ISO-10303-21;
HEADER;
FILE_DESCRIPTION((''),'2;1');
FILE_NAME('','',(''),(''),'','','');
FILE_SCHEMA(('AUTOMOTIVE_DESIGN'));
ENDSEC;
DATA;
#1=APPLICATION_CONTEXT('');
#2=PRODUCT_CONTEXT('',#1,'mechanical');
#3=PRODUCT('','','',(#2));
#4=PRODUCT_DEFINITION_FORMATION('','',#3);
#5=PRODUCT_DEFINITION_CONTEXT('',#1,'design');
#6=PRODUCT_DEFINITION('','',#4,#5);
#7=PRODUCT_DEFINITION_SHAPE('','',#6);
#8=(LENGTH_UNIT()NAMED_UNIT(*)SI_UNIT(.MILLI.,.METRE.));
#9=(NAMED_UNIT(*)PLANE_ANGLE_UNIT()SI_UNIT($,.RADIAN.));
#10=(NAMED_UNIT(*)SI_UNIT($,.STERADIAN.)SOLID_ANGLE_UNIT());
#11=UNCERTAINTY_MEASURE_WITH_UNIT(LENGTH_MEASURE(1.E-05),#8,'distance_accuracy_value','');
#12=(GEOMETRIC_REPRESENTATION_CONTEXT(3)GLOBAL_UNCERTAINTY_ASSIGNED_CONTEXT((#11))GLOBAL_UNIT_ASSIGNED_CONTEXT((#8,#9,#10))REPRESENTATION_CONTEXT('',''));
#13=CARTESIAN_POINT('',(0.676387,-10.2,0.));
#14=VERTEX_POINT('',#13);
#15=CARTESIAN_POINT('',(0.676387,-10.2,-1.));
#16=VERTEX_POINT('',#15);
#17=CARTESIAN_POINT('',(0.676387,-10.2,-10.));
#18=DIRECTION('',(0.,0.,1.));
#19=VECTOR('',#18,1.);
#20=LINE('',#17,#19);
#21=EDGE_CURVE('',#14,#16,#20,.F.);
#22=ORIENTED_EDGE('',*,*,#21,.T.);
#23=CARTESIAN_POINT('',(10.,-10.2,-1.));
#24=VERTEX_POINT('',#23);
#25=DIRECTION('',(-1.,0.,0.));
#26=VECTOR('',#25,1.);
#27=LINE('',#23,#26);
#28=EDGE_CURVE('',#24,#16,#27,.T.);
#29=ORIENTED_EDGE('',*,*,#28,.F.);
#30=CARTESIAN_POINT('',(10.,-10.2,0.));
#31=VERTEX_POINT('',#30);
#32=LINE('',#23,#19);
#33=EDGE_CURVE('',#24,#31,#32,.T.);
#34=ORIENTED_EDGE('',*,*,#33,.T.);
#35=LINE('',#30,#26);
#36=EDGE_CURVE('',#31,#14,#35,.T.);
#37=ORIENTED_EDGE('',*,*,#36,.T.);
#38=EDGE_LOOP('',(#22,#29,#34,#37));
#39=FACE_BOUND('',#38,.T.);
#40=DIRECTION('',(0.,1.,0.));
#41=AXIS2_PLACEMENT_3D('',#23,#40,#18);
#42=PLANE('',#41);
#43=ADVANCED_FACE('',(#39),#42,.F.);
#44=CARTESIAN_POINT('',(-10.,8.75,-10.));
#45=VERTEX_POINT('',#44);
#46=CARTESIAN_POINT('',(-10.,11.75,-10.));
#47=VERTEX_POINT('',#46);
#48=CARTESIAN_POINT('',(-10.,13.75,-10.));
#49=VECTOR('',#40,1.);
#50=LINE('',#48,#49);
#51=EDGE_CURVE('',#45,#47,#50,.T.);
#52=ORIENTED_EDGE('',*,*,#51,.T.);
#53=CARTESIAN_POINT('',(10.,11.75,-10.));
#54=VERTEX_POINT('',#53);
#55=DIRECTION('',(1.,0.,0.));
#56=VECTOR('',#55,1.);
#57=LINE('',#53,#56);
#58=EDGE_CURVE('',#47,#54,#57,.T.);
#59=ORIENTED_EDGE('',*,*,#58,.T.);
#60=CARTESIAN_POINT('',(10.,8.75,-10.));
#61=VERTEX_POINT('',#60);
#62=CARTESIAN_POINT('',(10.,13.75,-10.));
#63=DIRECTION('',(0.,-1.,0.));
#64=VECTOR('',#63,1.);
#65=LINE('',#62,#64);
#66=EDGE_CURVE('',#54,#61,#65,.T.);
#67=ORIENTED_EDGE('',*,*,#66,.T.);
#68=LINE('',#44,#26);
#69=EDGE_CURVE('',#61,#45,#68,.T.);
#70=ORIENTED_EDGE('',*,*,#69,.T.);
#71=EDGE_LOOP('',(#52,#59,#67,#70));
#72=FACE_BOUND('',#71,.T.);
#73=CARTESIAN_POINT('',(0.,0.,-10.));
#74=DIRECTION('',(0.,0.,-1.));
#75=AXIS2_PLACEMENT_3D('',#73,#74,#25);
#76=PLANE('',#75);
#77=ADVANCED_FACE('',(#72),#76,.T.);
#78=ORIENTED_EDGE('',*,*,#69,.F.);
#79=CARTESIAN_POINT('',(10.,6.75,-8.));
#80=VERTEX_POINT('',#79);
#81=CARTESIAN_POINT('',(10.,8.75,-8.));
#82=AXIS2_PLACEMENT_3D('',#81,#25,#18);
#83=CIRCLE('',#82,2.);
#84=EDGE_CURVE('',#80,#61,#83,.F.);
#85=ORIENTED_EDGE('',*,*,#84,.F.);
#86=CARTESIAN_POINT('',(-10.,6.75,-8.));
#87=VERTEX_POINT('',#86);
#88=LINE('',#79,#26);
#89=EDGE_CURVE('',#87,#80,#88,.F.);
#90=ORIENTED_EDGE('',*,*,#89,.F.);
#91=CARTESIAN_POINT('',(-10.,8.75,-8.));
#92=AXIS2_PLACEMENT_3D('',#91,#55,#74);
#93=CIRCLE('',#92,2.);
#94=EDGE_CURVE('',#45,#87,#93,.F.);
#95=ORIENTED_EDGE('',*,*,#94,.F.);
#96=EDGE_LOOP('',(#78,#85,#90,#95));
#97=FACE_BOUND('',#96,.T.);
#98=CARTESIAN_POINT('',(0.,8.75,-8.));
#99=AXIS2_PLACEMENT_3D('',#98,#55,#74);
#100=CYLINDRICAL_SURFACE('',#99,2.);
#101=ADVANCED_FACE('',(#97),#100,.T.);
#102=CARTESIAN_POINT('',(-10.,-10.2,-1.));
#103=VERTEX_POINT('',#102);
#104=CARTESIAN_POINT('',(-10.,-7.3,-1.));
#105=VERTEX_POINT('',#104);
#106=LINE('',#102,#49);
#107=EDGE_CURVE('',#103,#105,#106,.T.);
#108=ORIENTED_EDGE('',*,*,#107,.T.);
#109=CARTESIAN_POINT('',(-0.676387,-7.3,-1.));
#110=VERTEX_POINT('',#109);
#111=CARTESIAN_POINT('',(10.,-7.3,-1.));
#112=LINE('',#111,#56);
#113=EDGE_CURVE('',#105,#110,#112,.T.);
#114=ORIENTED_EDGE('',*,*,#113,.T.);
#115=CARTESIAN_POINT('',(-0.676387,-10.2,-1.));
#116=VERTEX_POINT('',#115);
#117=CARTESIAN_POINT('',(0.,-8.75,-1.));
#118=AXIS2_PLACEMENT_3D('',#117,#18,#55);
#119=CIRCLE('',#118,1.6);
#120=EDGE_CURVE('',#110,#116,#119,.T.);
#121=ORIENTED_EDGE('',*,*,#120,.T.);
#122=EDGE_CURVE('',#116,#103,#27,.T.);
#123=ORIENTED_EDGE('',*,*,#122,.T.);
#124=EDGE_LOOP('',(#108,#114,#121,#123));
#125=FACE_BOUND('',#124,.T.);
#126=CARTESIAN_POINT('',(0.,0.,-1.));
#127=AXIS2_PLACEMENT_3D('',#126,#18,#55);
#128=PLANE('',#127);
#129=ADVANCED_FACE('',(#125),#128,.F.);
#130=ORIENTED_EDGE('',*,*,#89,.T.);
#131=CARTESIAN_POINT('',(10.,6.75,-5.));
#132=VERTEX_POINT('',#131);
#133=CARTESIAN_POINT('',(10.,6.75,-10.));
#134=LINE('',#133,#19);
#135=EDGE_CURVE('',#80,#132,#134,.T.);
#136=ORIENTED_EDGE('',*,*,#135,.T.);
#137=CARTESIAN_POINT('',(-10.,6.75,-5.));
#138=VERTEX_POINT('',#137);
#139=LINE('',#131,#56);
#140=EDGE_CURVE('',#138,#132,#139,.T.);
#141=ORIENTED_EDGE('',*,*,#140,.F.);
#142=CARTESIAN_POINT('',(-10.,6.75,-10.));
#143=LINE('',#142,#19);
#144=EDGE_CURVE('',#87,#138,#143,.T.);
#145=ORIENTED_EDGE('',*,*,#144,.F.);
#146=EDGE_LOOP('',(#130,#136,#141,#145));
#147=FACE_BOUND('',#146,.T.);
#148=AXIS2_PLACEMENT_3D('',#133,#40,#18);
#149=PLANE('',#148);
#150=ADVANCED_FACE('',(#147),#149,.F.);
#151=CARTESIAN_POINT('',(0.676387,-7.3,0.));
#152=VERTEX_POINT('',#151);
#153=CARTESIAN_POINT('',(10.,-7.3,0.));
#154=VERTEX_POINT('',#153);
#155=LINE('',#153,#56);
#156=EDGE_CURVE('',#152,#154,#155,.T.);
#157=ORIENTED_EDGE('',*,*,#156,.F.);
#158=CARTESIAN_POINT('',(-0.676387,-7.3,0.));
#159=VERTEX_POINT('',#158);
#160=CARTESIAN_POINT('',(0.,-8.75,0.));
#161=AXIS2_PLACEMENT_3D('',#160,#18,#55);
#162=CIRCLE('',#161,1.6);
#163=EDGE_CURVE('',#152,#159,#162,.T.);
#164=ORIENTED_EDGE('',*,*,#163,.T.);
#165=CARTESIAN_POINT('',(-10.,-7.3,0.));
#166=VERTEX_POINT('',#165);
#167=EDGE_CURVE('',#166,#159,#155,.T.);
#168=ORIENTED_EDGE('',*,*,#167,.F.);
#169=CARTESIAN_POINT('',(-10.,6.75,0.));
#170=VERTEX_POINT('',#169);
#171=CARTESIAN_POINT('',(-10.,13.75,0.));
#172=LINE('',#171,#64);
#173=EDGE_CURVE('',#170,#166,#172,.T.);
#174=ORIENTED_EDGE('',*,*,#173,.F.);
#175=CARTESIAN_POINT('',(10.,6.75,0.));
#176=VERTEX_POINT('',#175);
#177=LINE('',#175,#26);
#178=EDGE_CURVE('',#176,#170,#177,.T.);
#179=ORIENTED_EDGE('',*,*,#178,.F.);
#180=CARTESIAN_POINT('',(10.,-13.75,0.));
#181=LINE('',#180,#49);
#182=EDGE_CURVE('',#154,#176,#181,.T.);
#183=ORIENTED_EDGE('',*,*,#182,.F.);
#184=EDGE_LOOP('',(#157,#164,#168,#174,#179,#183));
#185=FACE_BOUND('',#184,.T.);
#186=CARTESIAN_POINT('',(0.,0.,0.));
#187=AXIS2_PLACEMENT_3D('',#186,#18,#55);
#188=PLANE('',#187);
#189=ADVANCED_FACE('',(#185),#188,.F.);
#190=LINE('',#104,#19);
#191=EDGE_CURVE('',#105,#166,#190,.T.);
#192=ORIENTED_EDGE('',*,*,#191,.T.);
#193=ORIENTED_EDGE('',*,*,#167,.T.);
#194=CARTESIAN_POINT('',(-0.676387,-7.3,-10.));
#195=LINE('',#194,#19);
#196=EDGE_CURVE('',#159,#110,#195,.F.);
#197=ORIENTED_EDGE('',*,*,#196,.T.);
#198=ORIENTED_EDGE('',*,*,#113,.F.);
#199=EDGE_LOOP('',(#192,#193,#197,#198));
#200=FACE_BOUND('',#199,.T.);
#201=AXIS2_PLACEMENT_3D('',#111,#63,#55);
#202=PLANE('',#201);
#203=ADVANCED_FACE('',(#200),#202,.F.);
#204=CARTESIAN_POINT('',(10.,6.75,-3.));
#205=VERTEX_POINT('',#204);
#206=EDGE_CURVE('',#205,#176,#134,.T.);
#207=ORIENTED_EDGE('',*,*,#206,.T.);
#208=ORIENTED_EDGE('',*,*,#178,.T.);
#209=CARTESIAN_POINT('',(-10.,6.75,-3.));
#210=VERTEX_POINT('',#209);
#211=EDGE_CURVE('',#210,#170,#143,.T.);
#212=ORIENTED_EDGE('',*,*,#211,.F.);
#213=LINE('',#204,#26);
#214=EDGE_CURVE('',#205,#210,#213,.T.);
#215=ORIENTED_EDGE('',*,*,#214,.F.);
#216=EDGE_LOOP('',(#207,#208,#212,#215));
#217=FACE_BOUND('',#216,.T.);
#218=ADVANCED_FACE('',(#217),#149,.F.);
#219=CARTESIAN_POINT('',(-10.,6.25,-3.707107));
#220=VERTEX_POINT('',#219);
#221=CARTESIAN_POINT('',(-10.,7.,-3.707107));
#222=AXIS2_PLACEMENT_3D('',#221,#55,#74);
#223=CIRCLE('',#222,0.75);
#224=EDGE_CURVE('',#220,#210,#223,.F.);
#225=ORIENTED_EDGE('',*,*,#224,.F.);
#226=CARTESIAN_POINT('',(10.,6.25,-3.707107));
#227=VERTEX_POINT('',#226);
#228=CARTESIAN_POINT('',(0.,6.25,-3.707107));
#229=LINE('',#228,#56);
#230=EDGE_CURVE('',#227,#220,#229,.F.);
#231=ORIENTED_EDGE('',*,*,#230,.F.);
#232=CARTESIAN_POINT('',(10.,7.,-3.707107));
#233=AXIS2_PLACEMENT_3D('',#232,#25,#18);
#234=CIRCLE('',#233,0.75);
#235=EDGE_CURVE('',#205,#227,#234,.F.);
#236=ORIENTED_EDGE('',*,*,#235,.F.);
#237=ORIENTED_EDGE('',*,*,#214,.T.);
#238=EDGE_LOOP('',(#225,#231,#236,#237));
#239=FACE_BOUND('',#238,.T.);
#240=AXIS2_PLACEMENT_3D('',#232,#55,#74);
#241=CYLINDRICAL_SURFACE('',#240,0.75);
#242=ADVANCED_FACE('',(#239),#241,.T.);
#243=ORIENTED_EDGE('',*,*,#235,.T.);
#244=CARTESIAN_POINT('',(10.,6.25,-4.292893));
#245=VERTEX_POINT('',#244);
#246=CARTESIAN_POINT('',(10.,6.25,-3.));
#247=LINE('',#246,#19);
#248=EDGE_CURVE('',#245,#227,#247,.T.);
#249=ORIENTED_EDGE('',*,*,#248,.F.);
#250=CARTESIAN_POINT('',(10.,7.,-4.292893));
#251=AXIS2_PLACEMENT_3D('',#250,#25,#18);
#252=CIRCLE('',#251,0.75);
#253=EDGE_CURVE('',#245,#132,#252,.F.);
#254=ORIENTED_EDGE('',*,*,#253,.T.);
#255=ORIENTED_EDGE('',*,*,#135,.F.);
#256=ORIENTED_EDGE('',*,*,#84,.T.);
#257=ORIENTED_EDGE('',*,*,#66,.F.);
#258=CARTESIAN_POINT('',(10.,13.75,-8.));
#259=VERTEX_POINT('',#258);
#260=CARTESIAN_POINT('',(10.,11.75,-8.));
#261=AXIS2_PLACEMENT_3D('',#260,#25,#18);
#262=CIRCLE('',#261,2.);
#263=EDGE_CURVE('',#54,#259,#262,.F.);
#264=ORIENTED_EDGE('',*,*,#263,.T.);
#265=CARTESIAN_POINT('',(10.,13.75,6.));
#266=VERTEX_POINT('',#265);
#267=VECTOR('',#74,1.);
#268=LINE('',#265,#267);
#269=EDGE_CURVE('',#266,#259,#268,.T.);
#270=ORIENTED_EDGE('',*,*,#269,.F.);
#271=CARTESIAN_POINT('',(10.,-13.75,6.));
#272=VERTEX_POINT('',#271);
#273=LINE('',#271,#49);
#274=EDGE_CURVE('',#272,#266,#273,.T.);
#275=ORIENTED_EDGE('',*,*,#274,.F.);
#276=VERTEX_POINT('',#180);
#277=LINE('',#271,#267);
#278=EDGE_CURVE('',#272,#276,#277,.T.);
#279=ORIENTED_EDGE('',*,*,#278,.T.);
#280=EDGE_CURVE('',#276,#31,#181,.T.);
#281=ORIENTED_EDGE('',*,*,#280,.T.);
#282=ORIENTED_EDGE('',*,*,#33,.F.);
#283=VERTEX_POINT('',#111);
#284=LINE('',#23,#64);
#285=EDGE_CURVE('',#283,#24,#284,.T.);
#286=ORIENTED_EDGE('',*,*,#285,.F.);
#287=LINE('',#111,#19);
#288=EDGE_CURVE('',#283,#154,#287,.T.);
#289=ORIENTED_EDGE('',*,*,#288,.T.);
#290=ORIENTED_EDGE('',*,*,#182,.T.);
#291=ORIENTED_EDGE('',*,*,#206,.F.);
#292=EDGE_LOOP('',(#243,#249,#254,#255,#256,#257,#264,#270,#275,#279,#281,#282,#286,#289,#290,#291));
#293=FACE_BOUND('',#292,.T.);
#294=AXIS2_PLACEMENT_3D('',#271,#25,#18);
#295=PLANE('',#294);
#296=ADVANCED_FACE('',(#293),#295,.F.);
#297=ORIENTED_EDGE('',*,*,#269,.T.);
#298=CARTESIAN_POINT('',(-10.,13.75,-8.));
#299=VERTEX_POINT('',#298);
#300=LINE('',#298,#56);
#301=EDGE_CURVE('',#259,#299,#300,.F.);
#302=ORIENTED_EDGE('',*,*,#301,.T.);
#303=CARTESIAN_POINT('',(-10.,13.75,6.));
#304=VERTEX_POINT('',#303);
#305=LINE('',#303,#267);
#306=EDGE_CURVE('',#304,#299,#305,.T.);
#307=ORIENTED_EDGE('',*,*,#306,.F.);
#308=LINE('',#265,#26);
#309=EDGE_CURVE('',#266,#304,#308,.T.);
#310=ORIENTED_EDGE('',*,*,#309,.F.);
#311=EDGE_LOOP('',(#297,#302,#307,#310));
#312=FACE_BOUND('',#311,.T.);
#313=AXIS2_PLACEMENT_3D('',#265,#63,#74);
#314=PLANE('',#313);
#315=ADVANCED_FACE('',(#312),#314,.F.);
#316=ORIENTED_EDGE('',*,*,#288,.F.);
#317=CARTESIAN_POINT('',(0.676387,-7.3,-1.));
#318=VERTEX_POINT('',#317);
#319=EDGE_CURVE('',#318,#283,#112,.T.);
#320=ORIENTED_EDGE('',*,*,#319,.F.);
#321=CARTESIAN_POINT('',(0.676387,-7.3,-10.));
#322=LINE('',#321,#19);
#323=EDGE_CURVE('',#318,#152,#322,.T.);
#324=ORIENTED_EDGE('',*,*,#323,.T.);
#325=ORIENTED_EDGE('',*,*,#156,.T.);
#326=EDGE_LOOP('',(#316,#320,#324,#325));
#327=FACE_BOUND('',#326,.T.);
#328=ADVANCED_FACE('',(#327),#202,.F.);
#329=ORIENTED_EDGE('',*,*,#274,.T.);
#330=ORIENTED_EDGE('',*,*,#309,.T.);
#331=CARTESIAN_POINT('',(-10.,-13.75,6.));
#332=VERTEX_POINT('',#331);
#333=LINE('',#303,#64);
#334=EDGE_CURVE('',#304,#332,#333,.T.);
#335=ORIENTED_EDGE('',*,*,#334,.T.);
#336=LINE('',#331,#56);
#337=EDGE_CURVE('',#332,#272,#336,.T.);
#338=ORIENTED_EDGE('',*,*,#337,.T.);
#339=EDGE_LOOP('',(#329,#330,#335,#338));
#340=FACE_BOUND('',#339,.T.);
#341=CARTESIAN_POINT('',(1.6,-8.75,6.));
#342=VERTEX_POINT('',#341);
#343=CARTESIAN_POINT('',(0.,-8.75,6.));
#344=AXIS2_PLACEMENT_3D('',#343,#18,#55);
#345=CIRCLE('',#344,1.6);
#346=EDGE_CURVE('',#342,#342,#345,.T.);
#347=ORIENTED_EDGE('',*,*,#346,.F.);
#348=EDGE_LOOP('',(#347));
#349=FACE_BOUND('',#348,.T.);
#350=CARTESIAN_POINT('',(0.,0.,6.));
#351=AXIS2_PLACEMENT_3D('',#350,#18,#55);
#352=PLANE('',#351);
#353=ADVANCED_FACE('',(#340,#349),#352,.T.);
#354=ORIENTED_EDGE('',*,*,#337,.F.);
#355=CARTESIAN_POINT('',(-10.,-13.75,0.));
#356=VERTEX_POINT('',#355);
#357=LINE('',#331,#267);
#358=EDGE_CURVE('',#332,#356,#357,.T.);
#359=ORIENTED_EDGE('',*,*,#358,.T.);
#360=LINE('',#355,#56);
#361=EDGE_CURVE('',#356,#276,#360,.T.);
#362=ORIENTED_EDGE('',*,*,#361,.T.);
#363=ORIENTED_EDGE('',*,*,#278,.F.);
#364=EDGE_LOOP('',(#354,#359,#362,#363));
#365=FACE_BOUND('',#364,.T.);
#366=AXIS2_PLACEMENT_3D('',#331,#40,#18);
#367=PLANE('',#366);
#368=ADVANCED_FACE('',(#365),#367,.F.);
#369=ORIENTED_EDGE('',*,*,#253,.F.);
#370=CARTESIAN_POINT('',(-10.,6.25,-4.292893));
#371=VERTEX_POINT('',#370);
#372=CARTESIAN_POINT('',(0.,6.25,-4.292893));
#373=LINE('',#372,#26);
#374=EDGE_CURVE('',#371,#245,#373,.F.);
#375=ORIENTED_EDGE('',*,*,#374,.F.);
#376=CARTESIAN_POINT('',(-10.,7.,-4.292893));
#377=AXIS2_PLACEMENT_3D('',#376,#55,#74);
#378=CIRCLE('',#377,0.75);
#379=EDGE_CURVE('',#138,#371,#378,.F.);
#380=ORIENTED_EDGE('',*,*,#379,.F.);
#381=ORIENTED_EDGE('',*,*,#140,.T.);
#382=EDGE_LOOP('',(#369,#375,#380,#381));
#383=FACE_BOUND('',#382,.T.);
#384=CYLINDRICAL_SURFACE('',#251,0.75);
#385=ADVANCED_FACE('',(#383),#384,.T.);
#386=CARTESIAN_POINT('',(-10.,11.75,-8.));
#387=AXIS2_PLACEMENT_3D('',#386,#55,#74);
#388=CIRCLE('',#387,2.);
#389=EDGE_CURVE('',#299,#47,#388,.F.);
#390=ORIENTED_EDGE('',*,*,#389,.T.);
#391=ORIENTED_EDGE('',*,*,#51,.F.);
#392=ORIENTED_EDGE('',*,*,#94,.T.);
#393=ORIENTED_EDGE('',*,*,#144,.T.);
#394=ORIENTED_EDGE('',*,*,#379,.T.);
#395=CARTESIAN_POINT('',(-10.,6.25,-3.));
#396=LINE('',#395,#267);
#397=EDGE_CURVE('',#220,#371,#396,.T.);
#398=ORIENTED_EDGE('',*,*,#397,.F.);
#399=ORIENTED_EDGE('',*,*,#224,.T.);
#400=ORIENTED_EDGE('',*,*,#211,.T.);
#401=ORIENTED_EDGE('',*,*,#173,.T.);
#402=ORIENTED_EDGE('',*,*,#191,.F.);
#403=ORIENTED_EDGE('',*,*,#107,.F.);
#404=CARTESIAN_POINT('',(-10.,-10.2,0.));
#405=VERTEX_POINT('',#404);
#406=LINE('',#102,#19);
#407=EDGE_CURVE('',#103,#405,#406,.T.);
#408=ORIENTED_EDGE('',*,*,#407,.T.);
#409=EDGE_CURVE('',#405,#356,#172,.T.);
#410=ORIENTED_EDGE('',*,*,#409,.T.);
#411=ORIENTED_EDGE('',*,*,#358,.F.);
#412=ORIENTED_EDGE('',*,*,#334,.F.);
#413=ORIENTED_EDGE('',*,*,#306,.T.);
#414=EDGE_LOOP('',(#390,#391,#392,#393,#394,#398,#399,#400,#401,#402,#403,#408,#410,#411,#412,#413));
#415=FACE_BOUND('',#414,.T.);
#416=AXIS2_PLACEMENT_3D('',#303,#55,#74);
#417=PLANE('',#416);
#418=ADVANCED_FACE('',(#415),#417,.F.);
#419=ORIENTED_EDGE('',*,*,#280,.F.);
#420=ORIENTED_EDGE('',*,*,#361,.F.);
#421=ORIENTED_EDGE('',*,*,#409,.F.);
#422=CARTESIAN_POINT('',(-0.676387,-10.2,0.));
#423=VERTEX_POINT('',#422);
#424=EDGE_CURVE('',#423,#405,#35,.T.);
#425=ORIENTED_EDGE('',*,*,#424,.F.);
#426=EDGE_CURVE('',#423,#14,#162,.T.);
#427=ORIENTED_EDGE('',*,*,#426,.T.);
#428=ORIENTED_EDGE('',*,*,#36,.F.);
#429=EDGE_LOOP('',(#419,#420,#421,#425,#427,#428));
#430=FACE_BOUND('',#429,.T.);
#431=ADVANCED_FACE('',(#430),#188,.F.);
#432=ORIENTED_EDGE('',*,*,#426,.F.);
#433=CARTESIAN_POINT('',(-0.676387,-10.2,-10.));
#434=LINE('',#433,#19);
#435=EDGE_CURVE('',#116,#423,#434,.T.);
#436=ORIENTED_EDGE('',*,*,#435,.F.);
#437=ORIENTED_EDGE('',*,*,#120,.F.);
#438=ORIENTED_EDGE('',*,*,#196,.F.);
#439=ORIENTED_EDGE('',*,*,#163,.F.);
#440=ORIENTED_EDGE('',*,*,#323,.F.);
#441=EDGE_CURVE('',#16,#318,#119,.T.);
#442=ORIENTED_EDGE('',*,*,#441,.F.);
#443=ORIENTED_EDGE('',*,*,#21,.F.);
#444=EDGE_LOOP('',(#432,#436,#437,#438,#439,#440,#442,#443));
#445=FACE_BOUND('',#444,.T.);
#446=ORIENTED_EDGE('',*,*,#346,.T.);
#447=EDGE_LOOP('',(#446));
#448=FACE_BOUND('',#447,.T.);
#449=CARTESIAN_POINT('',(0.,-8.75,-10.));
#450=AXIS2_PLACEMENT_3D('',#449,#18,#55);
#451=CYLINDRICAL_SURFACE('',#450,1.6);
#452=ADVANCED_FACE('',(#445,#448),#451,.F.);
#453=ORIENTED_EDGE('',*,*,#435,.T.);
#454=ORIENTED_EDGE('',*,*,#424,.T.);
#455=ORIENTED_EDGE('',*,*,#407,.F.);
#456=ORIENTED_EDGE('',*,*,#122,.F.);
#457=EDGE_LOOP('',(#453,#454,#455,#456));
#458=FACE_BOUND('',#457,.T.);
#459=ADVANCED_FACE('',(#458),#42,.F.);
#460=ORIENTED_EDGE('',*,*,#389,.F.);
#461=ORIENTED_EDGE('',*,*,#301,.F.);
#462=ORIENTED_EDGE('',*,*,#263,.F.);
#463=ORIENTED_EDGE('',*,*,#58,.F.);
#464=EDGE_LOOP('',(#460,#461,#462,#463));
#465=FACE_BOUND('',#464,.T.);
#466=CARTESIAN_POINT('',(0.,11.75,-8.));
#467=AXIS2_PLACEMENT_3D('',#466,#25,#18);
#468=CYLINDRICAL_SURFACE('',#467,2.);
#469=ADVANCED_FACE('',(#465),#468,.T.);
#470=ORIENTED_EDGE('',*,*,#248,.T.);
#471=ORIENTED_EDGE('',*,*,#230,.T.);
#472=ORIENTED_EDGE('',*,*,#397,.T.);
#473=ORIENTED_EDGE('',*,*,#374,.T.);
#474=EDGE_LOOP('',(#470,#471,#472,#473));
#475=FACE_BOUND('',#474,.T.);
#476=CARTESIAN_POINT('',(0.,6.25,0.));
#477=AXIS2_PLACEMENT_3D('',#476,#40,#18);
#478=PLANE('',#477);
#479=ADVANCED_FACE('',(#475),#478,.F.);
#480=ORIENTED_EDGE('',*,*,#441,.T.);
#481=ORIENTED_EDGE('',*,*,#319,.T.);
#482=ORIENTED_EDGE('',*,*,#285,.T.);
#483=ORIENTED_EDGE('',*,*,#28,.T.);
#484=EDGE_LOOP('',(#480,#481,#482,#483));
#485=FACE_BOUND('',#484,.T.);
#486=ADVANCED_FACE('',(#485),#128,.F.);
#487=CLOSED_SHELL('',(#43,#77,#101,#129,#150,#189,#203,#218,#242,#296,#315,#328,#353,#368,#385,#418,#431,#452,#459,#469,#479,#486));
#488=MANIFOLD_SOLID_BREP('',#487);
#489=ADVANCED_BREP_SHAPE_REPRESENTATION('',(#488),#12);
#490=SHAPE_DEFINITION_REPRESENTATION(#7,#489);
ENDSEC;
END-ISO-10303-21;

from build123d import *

# Parameters (mm, degrees)
ESQUISSE1_W             = 20
ESQUISSE1_H             = 27.5
BOSS_EXTRU_1_DEPTH      = 6
ESQUISSE2_W             = 20
ESQUISSE2_H             = 7
BOSS_EXTRU_2_DEPTH      = 10
CONG_2_R                = 2
ESQUISSE3_W             = 20
ESQUISSE3_H             = 2.9
BOSS_EXTRU_3_DEPTH      = 1
ESQUISSE4_R             = 1.6
ENL_V_MAT_EXTRU_1_DEPTH = 24.346573624
ESQUISSE6_W             = 20
ESQUISSE6_H             = 2
BOSS_EXTRU_5_DEPTH      = 0.5
CONG_4_R                = 0.75


with BuildPart() as part:
    # Esquisse1 → Boss.-Extru.1 (new body)
    with BuildSketch(Plane.XY):
        Rectangle(ESQUISSE1_W, ESQUISSE1_H)
    extrude(amount=BOSS_EXTRU_1_DEPTH)

    # Esquisse2 → Boss.-Extru.2 (add)
    with BuildSketch(Plane(origin=(0, 0, 0), x_dir=(-1, 0, 0), z_dir=(0, 0, -1))):
        with Locations((0, 10.25)):
            Rectangle(ESQUISSE2_W, ESQUISSE2_H)
    extrude(amount=BOSS_EXTRU_2_DEPTH)

    # Congé2
    cong_2_edges = [part.edges().sort_by_distance(p)[0] for p in [
        (0, 6.75, -10),
        (0, 13.75, -10),
    ]]
    fillet(cong_2_edges, radius=CONG_2_R)

    # Esquisse3 → Boss.-Extru.3 (add)
    with BuildSketch(Plane(origin=(0, 0, 0), x_dir=(-1, 0, 0), z_dir=(0, 0, -1))):
        with Locations((0, -8.75)):
            Rectangle(ESQUISSE3_W, ESQUISSE3_H)
    extrude(amount=BOSS_EXTRU_3_DEPTH)

    # Esquisse4 → Enlèv. mat.-Extru.1 (cut, through all)
    with BuildSketch(Plane.XY.offset(6)):
        with Locations((0, -8.75)):
            Circle(ESQUISSE4_R)
    extrude(amount=-ENL_V_MAT_EXTRU_1_DEPTH, mode=Mode.SUBTRACT)

    # Esquisse6 → Boss.-Extru.5 (add)
    with BuildSketch(Plane.XZ.offset(-6.75)):
        with Locations((0, -4)):
            Rectangle(ESQUISSE6_W, ESQUISSE6_H)
    extrude(amount=BOSS_EXTRU_5_DEPTH)

    # Congé4
    # the kernel refuses this fillet: 0.75 mm, written as the material it takes off along each edge
    with BuildSketch(Plane(origin=(-11.767766953, 6.25, -5), x_dir=(0, 1, 0), z_dir=(1, 0, 0)), Plane(origin=(11.767766953, 6.25, -3), x_dir=(0, 1, 0), z_dir=(-1, 0, 0))) as cong_4_piece_1:
        with BuildLine():
            CenterArc((0.75, 0.707106781), CONG_4_R, 180, 70.528779366)
            Line((0, 0.707106781), (-0.015, 0.707106781))
            Line((-0.015, 0.707106781), (-0.015, 0))
            Line((-0.015, 0), (0, -0.015))
            ThreePointArc((0, -0.015), (0.25, -0.015), (0.495, -0.014142136))
            Line((0.495, -0.014142136), (0.5, 0))
        make_face()
    extrude(amount=23.535533906, mode=Mode.SUBTRACT)


solid = part.part
